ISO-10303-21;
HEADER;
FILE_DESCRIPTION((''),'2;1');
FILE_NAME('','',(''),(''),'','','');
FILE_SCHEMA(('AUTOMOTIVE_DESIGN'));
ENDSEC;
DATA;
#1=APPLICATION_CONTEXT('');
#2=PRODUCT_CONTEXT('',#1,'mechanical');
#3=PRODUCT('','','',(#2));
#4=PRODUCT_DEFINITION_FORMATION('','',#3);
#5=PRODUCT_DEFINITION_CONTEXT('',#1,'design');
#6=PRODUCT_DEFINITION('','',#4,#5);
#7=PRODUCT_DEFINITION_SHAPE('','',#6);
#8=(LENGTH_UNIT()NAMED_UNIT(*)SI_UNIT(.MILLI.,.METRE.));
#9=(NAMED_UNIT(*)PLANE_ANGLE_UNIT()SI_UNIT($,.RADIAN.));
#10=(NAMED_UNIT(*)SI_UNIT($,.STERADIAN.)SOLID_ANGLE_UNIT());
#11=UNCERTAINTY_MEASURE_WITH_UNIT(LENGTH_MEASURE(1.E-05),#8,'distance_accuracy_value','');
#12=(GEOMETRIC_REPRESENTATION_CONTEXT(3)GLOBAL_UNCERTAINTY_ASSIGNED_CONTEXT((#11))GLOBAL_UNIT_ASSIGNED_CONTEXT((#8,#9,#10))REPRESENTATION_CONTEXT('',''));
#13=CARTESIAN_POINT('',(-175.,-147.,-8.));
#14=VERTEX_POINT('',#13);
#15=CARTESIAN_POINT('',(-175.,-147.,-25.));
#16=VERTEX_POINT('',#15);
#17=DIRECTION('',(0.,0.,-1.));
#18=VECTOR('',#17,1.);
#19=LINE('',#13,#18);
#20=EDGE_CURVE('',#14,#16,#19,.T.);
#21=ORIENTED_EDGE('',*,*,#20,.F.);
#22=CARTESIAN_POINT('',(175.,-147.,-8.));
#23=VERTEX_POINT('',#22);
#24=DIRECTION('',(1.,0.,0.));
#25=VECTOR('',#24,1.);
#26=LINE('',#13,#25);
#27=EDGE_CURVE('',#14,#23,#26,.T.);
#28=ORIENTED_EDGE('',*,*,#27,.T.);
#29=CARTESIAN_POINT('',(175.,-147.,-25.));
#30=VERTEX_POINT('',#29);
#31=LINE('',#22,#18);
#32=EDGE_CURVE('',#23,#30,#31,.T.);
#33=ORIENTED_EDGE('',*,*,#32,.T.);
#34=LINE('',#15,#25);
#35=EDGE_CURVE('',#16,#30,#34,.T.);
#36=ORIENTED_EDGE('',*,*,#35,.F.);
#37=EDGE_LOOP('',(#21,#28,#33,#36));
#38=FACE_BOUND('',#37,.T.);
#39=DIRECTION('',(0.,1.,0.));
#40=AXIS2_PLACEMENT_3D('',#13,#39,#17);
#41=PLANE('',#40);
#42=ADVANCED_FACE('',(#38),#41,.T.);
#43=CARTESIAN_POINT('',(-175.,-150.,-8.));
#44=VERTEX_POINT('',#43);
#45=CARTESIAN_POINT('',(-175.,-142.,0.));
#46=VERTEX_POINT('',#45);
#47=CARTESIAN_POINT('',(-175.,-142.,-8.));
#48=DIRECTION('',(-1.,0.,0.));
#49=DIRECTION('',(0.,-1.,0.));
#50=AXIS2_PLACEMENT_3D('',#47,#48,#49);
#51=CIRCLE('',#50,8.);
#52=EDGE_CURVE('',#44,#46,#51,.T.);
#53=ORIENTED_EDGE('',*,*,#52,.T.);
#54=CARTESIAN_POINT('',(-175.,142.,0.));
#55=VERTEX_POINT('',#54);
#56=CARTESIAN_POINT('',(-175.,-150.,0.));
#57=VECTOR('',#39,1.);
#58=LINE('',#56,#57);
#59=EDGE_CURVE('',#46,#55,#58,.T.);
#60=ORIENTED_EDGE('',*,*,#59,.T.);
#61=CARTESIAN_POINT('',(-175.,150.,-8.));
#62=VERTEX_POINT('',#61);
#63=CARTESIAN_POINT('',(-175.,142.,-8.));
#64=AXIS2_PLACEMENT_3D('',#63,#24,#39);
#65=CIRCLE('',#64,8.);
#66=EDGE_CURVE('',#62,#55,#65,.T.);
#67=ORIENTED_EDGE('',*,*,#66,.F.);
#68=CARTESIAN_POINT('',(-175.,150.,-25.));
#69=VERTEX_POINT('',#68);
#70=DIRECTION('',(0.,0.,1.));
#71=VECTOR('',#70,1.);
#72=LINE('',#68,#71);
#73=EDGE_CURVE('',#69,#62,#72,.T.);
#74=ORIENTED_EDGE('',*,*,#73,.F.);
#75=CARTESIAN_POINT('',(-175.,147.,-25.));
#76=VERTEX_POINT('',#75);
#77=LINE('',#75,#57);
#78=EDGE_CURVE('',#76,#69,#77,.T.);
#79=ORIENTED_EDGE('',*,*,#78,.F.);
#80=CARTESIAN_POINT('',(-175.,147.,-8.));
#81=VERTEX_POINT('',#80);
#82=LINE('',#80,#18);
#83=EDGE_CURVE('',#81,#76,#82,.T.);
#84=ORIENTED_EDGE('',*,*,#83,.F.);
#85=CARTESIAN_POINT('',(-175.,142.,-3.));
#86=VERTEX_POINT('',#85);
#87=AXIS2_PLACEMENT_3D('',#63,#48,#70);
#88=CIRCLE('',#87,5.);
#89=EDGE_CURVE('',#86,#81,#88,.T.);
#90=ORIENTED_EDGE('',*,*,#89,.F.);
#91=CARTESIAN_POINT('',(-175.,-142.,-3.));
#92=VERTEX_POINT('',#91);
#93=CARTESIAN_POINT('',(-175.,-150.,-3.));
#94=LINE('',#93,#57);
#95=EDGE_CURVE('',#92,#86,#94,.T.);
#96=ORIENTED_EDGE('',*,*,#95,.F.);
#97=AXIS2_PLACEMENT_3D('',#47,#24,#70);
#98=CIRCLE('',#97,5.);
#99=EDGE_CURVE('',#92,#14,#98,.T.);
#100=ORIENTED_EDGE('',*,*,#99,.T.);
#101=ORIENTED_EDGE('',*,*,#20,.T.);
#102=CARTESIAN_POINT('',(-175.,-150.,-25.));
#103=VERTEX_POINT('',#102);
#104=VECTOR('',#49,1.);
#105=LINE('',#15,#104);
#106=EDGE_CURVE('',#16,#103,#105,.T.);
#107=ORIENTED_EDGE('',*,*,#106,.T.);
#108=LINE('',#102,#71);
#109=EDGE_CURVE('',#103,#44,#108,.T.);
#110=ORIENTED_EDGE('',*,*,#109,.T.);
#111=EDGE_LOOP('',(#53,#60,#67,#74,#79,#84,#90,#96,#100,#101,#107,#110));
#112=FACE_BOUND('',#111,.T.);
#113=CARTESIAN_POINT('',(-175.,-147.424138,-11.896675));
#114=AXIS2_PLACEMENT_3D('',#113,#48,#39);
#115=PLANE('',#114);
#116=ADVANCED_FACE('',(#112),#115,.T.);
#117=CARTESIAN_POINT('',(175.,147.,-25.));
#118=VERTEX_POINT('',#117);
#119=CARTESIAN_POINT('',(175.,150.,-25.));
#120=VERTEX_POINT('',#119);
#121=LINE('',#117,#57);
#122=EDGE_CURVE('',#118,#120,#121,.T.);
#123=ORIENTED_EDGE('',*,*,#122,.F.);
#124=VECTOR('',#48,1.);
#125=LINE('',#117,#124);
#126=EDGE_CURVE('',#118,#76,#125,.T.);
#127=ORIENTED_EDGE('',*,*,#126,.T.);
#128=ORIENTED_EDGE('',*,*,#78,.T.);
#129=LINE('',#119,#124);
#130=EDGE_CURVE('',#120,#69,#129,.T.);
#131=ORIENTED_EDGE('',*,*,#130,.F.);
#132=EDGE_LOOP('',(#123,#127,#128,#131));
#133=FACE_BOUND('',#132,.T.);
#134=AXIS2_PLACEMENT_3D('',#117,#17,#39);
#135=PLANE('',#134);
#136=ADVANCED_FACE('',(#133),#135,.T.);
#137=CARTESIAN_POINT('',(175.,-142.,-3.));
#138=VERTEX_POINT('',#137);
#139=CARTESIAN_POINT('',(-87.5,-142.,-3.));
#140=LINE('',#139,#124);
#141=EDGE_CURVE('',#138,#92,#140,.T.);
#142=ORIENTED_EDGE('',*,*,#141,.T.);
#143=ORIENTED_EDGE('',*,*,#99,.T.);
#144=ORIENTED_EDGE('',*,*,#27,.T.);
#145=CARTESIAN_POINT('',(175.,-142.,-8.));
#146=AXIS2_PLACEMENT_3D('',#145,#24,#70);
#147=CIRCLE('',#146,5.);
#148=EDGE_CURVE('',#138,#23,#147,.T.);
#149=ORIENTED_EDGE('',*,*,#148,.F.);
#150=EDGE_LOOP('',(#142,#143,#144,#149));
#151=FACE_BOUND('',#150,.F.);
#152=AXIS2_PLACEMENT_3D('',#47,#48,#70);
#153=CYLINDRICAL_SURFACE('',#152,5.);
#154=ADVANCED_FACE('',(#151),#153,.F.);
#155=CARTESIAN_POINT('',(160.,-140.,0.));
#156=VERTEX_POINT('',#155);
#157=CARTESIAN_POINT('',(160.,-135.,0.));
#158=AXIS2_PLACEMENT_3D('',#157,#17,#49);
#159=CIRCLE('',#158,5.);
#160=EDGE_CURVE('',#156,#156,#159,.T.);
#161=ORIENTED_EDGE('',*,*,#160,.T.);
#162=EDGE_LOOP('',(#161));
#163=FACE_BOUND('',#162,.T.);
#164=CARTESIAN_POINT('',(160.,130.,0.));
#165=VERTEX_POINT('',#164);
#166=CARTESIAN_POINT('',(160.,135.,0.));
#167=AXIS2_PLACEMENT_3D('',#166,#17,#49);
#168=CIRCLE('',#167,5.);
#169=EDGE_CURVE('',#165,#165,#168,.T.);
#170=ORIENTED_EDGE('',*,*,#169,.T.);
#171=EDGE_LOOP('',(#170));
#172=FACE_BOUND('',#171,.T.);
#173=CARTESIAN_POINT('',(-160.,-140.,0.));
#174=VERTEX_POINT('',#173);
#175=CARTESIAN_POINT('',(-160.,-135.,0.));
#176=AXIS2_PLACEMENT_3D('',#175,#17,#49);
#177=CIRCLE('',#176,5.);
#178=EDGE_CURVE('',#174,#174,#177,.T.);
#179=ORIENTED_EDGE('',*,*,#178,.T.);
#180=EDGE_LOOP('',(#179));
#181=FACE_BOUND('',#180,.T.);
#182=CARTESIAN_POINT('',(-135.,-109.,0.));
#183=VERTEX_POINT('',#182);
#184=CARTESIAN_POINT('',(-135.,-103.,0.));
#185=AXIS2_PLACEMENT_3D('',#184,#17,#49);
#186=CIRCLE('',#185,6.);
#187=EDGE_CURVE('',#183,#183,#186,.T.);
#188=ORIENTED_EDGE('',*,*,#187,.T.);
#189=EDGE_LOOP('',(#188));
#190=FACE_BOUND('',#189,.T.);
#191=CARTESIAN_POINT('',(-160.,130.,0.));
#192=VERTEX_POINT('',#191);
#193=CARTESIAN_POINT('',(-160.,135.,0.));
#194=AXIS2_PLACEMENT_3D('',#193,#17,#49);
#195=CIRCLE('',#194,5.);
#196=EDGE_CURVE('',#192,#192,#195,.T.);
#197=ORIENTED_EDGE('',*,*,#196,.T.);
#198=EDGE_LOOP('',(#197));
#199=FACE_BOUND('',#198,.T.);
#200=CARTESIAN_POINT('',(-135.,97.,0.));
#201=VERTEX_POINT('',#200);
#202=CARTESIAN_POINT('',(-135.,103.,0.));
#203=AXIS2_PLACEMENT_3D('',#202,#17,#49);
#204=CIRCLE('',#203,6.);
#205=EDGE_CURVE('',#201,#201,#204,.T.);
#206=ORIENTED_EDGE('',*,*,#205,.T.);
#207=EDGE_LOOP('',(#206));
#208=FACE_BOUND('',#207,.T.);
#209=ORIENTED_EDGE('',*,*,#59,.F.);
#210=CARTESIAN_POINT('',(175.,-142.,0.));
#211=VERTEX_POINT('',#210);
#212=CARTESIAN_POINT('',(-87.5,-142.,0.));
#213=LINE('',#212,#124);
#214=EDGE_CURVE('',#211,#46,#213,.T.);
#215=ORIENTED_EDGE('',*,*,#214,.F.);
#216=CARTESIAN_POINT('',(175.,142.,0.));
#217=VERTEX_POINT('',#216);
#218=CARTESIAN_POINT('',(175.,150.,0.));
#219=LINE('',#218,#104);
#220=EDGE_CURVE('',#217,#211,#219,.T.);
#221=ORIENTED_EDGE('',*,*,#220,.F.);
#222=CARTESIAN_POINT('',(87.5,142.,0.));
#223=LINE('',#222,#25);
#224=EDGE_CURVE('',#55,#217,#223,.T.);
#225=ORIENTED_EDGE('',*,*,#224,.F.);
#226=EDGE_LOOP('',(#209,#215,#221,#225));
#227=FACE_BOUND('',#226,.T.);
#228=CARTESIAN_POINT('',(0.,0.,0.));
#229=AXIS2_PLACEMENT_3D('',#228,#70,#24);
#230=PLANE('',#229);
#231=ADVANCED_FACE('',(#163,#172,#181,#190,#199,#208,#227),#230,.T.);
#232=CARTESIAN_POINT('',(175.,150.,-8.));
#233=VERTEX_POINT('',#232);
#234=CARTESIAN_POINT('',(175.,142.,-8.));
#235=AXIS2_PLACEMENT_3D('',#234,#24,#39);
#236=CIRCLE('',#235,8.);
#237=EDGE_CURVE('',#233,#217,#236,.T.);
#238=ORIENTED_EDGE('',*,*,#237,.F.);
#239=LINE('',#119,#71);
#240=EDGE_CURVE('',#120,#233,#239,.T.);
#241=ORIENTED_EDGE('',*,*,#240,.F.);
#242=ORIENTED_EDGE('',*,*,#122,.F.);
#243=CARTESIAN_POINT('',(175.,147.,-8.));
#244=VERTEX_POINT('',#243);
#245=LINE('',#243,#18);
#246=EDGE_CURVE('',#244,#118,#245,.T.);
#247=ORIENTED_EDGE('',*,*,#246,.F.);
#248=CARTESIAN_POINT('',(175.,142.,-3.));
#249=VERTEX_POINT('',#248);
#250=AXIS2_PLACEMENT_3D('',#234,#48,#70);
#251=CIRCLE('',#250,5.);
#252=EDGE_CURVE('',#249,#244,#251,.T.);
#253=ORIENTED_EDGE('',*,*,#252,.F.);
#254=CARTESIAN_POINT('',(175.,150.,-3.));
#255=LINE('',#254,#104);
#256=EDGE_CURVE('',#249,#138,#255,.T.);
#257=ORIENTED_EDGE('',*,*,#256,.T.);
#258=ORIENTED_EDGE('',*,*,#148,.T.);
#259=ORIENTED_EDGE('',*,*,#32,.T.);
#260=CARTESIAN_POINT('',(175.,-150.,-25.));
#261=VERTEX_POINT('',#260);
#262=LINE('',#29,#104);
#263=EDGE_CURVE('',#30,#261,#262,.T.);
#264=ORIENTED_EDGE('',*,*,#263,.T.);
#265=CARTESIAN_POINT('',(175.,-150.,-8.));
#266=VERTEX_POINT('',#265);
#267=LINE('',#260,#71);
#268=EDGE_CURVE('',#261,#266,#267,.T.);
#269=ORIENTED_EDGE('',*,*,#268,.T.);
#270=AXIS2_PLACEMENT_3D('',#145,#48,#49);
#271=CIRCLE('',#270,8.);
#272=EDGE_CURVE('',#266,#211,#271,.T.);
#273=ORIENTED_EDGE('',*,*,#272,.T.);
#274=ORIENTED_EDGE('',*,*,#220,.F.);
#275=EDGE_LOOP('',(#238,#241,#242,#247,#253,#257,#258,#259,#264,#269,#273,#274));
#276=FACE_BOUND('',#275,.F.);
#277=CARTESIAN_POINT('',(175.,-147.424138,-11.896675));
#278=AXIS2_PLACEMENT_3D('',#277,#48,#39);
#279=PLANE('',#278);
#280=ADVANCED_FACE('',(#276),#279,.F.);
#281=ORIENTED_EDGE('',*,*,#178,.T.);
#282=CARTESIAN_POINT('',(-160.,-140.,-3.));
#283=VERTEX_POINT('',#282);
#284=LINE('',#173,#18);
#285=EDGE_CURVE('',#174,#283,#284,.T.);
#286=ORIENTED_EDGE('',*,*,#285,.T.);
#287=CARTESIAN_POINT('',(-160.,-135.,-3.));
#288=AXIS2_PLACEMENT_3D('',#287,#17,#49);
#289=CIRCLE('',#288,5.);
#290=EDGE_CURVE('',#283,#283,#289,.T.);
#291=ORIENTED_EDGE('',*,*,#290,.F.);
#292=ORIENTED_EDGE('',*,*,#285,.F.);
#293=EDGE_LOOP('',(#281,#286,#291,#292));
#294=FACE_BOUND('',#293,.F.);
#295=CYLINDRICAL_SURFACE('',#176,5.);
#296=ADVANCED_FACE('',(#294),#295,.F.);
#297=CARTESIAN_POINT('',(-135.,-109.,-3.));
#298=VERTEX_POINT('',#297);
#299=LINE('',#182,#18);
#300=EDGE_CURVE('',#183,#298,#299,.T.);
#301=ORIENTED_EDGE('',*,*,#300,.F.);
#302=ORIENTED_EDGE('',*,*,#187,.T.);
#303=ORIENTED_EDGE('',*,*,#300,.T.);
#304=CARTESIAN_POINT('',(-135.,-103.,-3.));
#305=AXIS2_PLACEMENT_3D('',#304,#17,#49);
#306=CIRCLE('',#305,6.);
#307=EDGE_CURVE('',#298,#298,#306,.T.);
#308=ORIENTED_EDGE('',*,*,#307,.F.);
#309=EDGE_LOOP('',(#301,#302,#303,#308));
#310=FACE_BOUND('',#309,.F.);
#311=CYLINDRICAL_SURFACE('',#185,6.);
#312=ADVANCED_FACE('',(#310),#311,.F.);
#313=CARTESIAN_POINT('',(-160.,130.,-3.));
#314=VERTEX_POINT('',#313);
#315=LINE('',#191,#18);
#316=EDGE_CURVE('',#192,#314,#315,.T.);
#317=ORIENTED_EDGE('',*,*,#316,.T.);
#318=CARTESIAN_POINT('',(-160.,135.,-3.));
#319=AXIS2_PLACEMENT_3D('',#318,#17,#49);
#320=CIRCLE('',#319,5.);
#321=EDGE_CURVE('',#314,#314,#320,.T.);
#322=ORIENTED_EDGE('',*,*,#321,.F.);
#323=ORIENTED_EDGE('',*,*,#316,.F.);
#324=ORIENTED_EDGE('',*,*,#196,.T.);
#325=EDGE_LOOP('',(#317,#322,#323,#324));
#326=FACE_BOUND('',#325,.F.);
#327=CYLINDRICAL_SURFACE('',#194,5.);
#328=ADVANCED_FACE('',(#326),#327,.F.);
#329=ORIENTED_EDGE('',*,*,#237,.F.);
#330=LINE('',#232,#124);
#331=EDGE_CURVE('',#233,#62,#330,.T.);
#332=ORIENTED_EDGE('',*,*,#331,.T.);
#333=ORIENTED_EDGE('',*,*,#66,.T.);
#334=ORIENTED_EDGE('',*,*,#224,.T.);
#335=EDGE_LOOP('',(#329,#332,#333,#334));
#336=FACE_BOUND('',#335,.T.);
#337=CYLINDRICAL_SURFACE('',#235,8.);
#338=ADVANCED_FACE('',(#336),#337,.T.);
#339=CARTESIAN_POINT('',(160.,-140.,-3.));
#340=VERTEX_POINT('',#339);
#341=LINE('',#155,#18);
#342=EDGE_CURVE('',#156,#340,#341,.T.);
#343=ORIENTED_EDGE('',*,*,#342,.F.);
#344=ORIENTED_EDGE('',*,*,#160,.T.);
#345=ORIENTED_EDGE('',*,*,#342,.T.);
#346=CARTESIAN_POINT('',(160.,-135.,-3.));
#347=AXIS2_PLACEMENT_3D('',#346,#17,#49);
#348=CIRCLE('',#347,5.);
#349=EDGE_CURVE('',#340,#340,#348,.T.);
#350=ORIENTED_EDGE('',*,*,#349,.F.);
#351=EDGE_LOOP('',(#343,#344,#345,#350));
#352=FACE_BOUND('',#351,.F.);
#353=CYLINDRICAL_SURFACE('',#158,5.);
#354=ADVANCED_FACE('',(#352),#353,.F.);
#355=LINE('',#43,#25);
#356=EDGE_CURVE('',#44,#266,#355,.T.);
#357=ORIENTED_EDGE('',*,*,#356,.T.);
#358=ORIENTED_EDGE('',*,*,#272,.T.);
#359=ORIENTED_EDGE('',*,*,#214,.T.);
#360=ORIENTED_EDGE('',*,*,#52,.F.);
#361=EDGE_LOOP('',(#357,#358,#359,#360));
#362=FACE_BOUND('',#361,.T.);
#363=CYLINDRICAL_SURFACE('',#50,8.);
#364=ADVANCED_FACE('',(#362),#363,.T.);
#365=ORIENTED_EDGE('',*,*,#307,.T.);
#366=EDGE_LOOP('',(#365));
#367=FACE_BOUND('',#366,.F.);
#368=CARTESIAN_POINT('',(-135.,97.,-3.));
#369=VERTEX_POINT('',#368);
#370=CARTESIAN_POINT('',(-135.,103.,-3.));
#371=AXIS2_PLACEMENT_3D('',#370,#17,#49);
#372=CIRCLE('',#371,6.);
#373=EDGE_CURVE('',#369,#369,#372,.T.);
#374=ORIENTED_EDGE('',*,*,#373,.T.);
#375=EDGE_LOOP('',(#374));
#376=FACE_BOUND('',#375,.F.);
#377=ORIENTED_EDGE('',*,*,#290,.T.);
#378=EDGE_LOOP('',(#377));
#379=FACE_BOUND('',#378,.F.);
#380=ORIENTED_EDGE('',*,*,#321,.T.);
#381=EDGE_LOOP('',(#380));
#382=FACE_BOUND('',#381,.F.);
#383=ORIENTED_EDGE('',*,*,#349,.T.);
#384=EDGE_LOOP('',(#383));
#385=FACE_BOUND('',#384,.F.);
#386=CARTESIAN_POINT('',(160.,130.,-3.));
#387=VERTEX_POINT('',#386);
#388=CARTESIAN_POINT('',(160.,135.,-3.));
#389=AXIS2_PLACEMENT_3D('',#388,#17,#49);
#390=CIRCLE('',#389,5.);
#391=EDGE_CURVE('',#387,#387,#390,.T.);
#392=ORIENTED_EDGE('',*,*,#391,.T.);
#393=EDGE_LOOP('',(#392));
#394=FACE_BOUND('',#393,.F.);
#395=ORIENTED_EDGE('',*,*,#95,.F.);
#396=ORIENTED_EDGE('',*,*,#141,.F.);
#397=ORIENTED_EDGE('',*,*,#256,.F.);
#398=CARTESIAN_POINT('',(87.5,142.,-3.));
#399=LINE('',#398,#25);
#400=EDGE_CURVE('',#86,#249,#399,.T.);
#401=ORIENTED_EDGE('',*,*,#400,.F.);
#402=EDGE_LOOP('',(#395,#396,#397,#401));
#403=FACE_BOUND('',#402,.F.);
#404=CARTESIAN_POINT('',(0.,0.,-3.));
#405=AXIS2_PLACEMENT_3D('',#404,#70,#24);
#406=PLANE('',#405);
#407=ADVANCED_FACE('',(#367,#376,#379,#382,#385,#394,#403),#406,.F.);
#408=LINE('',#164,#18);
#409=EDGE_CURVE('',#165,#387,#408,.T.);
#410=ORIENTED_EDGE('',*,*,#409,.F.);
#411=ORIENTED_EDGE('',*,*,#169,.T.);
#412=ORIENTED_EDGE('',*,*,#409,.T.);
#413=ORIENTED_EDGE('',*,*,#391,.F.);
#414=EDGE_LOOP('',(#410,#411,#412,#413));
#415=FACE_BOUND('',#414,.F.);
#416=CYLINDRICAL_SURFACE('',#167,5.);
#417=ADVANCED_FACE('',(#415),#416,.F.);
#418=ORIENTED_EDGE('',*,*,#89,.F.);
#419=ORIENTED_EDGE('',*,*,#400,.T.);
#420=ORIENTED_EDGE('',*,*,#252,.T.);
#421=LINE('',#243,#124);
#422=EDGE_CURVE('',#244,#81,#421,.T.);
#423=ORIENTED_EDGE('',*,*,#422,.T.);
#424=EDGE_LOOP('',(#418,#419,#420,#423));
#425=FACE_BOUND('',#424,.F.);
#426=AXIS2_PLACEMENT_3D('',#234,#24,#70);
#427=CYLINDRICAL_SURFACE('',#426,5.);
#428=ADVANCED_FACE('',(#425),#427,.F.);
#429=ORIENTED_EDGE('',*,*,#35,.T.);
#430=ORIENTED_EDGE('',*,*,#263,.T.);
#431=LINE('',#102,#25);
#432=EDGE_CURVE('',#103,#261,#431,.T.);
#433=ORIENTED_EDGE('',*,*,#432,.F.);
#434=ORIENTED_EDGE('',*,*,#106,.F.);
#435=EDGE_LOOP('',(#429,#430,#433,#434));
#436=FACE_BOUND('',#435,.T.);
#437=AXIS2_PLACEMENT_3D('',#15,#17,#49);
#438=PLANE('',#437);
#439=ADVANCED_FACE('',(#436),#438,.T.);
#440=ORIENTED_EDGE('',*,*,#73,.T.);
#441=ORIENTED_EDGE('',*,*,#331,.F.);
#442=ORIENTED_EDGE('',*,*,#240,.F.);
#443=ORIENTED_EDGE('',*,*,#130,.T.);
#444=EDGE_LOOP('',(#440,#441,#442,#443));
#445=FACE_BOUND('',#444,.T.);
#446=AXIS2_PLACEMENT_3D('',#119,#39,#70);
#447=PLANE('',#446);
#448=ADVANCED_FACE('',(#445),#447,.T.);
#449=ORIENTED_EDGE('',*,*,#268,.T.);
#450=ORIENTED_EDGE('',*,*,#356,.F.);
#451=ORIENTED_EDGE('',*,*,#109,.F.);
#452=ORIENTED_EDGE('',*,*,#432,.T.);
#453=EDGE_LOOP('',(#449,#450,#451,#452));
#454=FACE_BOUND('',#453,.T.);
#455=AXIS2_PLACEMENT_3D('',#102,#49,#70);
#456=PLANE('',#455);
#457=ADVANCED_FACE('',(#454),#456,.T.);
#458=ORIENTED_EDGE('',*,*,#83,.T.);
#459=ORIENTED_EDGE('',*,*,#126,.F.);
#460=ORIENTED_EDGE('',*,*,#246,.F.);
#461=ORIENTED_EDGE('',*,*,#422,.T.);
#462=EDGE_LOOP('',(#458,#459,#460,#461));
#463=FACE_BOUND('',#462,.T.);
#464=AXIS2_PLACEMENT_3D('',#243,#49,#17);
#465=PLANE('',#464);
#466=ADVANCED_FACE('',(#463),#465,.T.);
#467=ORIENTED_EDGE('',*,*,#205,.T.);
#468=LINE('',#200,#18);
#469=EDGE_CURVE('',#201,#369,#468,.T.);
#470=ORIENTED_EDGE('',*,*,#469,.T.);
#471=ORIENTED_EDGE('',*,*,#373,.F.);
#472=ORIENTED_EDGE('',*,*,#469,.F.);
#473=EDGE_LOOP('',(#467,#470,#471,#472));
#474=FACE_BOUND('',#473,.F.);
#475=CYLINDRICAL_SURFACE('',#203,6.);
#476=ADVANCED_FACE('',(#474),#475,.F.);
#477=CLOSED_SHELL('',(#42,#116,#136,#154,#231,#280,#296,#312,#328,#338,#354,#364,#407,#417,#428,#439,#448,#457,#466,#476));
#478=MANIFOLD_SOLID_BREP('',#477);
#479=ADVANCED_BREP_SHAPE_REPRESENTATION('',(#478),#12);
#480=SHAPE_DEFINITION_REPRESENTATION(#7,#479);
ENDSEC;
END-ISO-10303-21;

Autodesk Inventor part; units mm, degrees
ref_plane "YZ Plane" through (0, 0, 0) normal (1, 0, 0) x (0, 1, 0)
ref_plane "XZ Plane" through (0, 0, 0) normal (0, 1, 0) x (-1, 0, 0)
ref_plane "XY Plane" through (0, 0, 0) normal (0, 0, 1) x (1, 0, 0)
sketch "Sketch1" plane through (0, 0, 0) normal (0, 0, 1) x (1, 0, 0)
  line L0 (-175, 150) -> (175, 150)
  line L1 (175, 150) -> (175, -150)
  line L2 (175, -150) -> (-175, -150)
  line L3 (-175, -150) -> (-175, 150)
  line L4 (-175, 150) -> (175, -150) construction
  point P0 (0, 0)
  point P1 (0, 0)
  dimension "d0" = 350
  dimension "d1" = 300
extrude "Plate1" add sketch "Sketch1" against normal blind 3
sketch "Sketch2" plane through (0, 0, 0) normal (0, 0, 1) x (1, 0, 0)
  line L0 (175, -150) -> (175, 150) projected
  line L1 (-135, 103) -> (-135, -103) construction
  line L2 (-175, 150) -> (-175, -150) projected
  point P0 (0, 0)
  point P1 (-135, 0)
  dimension "d23" = 40
  dimension "d24" = 206
hole "Hole4" at (-135, 103, 0) at (-135, -103, 0) direction (0, 0, -1) diameter 12 end through all
sketch "Sketch3" plane through (0, 0, 0) normal (0, 0, 1) x (1, 0, 0)
  line L0 (-160, 135) -> (160, 135) construction
  line L1 (160, 135) -> (160, -135) construction
  line L2 (160, -135) -> (-160, -135) construction
  line L3 (-160, -135) -> (-160, 135) construction
  line L4 (-160, 135) -> (160, -135) construction
  point P0 (0, 0)
  point P1 (0, 0)
  dimension "d14" = 270
  dimension "d15" = 320
hole "Hole2" at (-160, 135, 0) at (160, 135, 0) at (160, -135, 0) at (-160, -135, 0) direction (0, 0, -1) diameter 10 end through all
sketch "Sketch4" plane through (-175, -147, 0) normal (0, -1, 0) x (1, 0, 0)
  line L0 (350, 0) -> (0, 0)
  line L1 (0, 0) -> (0, -25)
  line L2 (0, -25) -> (350, -25)
  line L3 (350, -25) -> (350, 0)
edge flange "Flange1" height 25 angle 90 thickness 3 bend radius 5 thickness toward (0, -1, 0) relief round relief width 3 relief depth 1.5 corner gap 5 corner form 0 edges at (0, -150, -3) (0, 150, -3) wall of the first edge with corners at (175, -147, 0) (-175, -147, 0) (-175, -147, -25) (175, -147, -25)
bend "Bend1"
corner "Corner1"
equation "\"d2\" = Thickness"
equation "\"d39\" = BendReliefWidth"
equation "\"d40\" = BendReliefDepth"
equation "\"d41\" = MinimumRemnant"
equation "\"d42\" = TransitionRadius"
equation "\"d45\" = BendRadius"
equation "\"d46\" = CornerReliefSize"
equation "\"d47\" = GapSize"
equation "\"d48\" = JacobiRadiusSize"
equation "\"BendReliefWidth\" = Thickness"
equation "\"BendReliefDepth\" = 0.5 * Thickness"
equation "\"CornerReliefSize\" = 4 * Thickness"
equation "\"MinimumRemnant\" = 2 * Thickness"
equation "\"TransitionRadius\" = BendRadius"
equation "\"JacobiRadiusSize\" = BendRadius"
equation "\"GapSize\" = Thickness"
equation "\"Thickness\" = 3"
equation "\"BendRadius\" = 5"
properties part number "CP-190 plate" material "Stainless Steel"
